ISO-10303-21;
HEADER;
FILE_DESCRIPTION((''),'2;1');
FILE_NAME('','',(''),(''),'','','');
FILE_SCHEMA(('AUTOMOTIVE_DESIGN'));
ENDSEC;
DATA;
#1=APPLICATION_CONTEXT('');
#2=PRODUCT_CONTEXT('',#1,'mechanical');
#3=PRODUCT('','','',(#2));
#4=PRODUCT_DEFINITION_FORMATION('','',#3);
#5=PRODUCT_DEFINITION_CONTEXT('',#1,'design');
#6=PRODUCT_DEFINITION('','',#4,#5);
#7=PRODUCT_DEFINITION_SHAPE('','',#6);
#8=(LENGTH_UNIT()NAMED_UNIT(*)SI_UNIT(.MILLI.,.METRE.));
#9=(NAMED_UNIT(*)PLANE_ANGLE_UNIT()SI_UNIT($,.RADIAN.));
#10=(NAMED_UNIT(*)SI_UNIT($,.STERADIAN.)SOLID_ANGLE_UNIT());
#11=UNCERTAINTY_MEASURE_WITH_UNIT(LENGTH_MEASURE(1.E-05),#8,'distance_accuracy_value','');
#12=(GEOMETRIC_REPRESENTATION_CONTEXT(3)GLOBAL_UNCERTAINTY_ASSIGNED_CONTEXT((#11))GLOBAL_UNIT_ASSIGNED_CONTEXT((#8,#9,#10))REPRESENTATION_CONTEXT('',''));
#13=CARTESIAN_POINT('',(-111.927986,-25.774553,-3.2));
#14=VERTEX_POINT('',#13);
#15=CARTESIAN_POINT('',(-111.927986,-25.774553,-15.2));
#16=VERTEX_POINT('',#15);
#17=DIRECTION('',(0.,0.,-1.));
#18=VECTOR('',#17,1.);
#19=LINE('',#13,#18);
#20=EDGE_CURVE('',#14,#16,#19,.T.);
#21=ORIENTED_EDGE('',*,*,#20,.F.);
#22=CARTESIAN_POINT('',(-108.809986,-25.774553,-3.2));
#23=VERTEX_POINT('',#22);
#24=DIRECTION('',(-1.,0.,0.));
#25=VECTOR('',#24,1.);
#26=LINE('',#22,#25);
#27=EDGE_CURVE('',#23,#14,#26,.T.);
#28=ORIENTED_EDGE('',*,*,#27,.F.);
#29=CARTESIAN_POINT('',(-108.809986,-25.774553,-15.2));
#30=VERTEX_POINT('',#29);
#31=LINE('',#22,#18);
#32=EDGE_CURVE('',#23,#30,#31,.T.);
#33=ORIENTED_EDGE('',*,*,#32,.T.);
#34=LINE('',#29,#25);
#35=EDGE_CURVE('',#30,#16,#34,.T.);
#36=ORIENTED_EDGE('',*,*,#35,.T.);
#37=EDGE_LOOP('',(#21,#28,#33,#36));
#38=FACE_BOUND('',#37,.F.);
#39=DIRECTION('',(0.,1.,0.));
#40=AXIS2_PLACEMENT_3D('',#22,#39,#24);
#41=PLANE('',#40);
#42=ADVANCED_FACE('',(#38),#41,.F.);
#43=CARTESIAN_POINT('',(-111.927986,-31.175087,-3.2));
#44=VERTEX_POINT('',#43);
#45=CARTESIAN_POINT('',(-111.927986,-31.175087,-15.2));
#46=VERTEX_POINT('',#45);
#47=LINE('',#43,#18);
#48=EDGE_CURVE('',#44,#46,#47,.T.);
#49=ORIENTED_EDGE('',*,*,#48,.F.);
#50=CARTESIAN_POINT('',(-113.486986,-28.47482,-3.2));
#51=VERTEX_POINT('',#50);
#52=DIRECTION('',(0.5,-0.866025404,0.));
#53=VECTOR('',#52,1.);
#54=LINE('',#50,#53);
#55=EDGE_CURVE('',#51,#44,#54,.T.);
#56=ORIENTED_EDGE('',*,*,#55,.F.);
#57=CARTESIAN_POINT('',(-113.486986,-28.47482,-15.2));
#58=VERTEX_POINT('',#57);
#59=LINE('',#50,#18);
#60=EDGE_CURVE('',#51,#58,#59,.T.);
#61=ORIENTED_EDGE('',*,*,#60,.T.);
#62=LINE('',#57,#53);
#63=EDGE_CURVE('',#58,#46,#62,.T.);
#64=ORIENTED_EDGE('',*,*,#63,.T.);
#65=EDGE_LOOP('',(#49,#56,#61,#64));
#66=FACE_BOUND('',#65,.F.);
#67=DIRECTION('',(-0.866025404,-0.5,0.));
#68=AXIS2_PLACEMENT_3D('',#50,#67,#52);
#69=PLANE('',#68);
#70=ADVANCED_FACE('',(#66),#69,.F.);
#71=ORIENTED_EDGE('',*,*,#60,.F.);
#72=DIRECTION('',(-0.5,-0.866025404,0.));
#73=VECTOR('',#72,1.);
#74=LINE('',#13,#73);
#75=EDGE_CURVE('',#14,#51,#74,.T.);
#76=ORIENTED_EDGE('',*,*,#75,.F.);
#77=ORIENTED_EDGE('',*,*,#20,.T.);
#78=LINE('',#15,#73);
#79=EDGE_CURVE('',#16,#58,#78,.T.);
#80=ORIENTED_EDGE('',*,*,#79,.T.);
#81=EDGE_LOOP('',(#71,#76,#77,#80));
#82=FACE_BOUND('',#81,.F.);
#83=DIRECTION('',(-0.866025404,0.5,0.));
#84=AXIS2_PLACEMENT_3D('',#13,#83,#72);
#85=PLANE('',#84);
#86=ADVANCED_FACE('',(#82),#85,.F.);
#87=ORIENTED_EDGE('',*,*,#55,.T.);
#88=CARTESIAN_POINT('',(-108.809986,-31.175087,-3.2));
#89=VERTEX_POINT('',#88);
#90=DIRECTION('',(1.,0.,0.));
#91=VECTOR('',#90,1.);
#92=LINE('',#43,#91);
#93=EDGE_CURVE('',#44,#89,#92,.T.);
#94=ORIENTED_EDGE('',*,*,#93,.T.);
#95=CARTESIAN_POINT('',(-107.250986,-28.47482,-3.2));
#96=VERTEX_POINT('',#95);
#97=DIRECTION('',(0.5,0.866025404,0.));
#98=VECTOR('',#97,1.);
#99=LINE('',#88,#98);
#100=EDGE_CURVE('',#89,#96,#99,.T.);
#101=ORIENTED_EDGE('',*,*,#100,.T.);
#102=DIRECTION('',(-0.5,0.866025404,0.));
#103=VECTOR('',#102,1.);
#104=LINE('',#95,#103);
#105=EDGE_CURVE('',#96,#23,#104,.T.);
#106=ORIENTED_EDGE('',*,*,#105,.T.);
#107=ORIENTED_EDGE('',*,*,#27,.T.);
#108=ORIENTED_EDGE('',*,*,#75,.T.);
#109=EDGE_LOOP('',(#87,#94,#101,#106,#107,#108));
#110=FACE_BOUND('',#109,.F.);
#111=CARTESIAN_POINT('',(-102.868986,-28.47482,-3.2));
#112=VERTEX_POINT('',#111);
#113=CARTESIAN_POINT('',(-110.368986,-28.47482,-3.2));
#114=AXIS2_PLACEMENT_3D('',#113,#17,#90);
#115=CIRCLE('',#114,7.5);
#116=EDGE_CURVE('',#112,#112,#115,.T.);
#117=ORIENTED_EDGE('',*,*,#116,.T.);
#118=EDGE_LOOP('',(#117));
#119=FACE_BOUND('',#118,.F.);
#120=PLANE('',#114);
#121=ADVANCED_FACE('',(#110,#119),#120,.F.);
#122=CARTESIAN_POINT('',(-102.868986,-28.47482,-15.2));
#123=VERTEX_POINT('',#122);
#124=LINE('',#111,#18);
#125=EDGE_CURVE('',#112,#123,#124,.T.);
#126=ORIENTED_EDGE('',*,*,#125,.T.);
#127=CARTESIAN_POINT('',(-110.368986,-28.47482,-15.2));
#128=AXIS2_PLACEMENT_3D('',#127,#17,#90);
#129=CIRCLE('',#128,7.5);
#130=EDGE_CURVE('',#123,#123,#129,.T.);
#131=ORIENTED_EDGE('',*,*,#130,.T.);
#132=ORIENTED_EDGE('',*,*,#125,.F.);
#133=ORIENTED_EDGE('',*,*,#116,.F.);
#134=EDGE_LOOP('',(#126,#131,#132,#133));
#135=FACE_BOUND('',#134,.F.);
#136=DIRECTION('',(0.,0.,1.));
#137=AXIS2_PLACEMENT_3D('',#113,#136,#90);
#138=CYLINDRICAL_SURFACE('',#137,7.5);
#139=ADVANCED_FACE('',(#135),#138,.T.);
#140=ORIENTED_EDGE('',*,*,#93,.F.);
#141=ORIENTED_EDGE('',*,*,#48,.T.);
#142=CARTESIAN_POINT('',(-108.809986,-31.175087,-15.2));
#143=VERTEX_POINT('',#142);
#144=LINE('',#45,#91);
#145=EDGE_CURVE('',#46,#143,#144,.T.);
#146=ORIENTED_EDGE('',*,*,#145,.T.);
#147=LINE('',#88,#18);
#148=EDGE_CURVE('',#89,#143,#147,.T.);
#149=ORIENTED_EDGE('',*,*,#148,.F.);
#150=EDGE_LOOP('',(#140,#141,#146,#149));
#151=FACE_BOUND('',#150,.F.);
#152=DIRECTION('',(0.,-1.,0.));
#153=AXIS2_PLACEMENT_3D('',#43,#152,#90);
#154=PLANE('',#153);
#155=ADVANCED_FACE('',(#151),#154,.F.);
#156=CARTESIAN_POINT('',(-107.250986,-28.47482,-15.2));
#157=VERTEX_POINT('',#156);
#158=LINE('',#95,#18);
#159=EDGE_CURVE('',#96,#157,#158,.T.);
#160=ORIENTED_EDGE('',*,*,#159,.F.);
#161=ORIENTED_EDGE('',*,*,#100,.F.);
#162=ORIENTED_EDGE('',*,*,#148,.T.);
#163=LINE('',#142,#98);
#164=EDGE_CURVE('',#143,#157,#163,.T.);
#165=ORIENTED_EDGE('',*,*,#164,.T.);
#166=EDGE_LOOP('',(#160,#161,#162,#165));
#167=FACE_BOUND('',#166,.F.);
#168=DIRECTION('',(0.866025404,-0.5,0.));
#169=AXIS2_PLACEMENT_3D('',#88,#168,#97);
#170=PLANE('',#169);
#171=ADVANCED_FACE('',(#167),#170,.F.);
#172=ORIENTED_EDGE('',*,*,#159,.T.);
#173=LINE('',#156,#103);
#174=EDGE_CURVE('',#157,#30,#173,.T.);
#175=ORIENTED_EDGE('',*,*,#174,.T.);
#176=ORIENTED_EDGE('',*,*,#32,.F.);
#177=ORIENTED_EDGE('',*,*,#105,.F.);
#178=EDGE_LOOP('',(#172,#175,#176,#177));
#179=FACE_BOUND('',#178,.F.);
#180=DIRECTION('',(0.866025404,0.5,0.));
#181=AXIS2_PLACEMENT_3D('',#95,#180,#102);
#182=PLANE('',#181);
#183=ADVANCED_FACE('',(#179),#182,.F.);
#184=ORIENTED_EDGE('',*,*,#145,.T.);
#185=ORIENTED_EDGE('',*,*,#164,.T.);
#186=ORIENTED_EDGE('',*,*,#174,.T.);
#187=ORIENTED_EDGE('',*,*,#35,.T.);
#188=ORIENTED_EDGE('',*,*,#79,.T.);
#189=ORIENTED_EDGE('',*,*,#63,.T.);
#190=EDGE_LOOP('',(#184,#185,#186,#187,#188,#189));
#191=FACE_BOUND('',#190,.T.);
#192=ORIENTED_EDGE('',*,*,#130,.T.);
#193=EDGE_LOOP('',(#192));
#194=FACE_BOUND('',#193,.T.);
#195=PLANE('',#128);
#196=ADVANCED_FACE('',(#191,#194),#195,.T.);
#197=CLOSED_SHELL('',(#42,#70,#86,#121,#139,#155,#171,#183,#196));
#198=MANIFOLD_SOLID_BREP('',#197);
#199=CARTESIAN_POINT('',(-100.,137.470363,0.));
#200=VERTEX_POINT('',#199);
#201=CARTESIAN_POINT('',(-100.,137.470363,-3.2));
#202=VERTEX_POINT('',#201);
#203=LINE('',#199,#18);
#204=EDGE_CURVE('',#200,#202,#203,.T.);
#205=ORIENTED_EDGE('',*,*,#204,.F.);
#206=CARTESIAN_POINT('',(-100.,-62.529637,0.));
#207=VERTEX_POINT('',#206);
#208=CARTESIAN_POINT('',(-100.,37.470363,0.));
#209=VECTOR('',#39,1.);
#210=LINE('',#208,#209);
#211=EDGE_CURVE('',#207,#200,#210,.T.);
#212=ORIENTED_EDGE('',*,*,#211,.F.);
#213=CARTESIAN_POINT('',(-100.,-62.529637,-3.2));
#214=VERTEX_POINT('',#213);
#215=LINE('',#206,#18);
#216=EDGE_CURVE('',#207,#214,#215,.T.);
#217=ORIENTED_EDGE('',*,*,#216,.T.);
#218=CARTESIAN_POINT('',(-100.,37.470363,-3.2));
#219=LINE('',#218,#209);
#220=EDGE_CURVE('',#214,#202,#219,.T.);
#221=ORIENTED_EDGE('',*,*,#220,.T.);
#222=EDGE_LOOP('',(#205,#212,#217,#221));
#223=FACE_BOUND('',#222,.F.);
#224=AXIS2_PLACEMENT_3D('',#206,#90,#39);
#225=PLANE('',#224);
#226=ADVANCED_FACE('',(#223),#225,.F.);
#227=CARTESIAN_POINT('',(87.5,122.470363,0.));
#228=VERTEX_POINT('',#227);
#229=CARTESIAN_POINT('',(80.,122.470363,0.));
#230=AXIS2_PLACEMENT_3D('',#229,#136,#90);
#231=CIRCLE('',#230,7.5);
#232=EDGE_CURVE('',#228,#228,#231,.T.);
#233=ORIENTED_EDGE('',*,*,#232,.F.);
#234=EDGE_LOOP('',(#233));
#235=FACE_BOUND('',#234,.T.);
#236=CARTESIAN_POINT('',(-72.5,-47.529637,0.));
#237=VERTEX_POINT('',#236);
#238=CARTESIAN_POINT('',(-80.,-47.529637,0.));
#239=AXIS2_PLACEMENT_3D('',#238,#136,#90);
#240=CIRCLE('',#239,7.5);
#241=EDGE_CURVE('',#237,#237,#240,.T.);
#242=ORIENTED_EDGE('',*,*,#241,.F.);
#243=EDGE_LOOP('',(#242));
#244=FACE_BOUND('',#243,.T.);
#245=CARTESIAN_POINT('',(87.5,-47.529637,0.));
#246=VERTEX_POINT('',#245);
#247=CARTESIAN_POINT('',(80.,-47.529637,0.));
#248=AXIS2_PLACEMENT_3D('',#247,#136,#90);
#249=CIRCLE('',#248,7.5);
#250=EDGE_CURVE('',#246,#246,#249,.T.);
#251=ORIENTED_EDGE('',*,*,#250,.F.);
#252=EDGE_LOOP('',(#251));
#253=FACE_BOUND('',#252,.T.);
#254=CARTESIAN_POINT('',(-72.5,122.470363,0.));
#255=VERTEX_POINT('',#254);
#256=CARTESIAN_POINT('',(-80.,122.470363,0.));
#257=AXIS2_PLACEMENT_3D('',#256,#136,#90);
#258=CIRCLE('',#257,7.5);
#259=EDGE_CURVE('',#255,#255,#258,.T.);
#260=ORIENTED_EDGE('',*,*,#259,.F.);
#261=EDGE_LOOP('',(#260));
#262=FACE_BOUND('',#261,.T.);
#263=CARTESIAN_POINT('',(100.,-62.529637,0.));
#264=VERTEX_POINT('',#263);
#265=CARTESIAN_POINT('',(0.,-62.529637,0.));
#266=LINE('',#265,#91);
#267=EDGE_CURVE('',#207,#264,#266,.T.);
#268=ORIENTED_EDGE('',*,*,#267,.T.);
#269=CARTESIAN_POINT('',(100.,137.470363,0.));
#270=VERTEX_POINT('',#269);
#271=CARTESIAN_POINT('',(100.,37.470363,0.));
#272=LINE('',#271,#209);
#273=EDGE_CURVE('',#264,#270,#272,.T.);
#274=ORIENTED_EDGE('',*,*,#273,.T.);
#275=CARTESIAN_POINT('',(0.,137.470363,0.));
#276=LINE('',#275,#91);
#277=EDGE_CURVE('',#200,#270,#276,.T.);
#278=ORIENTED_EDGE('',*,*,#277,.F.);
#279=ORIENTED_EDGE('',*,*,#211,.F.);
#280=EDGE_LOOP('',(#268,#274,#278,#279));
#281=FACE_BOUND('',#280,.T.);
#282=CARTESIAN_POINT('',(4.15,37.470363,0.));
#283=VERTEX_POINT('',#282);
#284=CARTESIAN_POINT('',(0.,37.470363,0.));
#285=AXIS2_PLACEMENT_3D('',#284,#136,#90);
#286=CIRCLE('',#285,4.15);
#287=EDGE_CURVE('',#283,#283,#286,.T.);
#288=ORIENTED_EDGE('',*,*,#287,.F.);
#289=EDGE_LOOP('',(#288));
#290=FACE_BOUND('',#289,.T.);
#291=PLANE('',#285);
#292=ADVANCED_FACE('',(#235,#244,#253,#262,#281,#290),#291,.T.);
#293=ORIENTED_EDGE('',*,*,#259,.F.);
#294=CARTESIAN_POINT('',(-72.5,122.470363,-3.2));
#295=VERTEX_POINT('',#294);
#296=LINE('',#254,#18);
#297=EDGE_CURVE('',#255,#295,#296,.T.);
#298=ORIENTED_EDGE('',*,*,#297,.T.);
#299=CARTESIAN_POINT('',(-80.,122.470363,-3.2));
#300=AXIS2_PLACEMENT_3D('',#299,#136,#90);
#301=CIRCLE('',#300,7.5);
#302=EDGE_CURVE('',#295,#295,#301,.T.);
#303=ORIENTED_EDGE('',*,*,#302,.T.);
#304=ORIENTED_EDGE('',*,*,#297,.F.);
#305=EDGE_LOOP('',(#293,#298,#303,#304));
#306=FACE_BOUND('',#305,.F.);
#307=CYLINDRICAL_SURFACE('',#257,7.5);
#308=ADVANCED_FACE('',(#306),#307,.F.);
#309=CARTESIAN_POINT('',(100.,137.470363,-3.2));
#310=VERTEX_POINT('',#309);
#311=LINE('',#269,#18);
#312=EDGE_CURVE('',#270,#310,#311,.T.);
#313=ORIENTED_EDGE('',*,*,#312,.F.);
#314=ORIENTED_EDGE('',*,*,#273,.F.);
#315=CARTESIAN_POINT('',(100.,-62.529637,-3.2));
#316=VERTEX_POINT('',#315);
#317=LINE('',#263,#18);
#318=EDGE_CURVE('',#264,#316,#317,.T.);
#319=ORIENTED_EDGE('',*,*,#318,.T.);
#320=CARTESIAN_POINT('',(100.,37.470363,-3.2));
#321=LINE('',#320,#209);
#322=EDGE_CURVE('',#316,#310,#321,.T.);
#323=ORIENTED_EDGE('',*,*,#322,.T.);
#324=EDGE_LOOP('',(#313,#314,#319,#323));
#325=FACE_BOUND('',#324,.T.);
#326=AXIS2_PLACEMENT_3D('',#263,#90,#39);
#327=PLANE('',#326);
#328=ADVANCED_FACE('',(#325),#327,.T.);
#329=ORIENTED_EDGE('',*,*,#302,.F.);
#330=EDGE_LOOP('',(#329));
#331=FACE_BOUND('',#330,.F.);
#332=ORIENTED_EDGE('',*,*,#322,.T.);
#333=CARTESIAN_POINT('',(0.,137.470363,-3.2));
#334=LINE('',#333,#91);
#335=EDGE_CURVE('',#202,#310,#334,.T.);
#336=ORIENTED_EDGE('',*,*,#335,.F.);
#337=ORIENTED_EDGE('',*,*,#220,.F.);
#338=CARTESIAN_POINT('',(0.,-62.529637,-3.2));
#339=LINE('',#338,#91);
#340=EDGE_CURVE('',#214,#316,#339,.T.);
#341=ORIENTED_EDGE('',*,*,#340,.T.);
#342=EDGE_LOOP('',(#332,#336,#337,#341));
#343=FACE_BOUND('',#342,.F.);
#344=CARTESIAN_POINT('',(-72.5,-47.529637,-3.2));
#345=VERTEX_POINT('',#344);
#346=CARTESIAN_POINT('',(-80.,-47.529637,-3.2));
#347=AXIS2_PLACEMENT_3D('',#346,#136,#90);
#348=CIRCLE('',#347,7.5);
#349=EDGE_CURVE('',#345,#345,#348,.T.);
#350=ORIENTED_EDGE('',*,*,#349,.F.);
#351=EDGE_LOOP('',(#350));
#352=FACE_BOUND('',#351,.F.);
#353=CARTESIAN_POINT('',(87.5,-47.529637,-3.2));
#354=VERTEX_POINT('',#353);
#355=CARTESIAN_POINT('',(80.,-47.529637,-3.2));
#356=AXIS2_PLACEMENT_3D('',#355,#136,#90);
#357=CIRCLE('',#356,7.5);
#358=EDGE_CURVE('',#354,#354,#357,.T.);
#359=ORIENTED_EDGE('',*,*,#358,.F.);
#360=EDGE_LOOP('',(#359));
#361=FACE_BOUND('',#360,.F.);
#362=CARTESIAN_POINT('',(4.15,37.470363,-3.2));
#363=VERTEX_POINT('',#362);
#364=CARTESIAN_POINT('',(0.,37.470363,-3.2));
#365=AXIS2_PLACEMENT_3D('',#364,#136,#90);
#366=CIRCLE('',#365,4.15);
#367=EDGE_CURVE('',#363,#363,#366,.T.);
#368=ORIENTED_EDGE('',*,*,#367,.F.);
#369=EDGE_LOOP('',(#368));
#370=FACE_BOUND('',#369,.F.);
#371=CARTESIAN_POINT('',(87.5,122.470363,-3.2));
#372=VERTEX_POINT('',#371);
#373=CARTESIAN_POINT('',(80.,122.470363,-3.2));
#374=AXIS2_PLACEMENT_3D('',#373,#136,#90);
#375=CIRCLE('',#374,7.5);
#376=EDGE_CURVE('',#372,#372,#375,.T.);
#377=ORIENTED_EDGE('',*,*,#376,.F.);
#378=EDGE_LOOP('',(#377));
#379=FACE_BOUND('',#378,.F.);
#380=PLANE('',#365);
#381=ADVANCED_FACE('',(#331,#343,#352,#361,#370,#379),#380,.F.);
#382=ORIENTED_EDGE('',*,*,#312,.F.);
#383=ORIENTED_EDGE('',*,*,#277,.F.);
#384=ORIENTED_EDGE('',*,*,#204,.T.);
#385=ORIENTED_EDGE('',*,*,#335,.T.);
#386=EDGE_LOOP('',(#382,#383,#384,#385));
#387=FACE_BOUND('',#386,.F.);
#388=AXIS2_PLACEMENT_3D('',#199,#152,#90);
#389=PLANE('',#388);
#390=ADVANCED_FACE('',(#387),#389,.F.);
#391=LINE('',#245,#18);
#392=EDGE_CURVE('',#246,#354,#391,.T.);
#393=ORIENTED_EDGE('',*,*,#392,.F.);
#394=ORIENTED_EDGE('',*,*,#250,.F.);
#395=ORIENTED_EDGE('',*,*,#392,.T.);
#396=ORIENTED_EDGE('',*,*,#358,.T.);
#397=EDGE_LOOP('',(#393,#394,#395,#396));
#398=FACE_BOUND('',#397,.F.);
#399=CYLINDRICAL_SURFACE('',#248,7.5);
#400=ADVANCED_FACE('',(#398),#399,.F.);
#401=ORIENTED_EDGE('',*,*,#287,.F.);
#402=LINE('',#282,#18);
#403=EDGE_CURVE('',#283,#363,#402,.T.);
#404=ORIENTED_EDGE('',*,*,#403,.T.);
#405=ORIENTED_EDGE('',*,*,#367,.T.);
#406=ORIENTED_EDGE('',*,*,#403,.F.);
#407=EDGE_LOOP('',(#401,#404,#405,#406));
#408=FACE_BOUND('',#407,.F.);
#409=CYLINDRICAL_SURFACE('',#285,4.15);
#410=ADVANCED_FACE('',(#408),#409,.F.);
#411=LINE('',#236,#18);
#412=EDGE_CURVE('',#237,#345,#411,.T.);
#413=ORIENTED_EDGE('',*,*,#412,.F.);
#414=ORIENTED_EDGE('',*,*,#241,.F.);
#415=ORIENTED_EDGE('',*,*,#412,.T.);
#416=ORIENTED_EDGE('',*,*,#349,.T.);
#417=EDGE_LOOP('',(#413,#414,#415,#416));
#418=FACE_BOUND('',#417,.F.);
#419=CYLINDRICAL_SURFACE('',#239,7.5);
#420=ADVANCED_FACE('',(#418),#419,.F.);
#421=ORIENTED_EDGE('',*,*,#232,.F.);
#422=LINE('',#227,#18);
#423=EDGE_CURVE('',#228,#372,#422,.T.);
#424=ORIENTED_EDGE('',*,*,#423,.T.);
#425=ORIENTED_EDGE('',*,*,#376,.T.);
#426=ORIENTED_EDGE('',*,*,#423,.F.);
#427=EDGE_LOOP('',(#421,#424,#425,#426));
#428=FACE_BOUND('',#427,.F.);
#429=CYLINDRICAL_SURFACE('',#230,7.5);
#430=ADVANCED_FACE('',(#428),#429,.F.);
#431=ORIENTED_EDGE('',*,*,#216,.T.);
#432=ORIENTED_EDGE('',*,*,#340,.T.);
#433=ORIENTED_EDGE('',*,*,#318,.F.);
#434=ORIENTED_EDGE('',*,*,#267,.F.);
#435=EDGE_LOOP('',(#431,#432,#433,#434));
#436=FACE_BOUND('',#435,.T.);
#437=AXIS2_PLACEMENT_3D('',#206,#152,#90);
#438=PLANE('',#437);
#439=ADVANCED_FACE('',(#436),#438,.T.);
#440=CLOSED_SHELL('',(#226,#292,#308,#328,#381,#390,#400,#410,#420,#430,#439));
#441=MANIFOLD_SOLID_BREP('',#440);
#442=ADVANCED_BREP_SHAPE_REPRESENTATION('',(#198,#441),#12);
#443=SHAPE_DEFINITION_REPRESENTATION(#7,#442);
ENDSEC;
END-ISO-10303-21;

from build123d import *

# Parameters (mm, degrees)
F0_W     = 200
F0_H     = 200
F0_R     = 7.5
F0_R_2   = 4.15
F1_DEPTH = 3.2
F2_R     = 7.5
F3_DEPTH = 12


with BuildPart() as f1:
    # F0 (on Top) → F1 (new body)
    with BuildSketch(Plane.XY):
        with Locations((0, 37.4703630805)):
            Rectangle(F0_W, F0_H)
        with Locations((-80, -47.5296369195)):
            Circle(F0_R, mode=Mode.SUBTRACT)
        with Locations((80, -47.5296369195)):
            Circle(F0_R, mode=Mode.SUBTRACT)
        with Locations((0, 37.4703630805)):
            Circle(F0_R_2, mode=Mode.SUBTRACT)
        with Locations((-80, 122.4703630805)):
            Circle(F0_R, mode=Mode.SUBTRACT)
        with Locations((80, 122.4703630805)):
            Circle(F0_R, mode=Mode.SUBTRACT)
    extrude(amount=-F1_DEPTH)


with BuildPart() as f3:
    # F2 (on face) → F3 (new body)
    with BuildSketch(Plane(origin=(0, 0, -3.2), x_dir=(1, 0, 0), z_dir=(0, 0, -1))):
        with Locations((-110.3689859124, 28.4748198305)):
            Circle(F2_R)
        Polygon((-113.4869859124, 28.4748198305), (-111.9279859124, 31.1750870395), (-108.8099859124, 31.1750870395), (-107.2509859124, 28.4748198305), (-108.8099859124, 25.7745526215), (-111.9279859124, 25.7745526215), align=None, mode=Mode.SUBTRACT)
    extrude(amount=F3_DEPTH)


solid = Compound([f1.part, f3.part])
